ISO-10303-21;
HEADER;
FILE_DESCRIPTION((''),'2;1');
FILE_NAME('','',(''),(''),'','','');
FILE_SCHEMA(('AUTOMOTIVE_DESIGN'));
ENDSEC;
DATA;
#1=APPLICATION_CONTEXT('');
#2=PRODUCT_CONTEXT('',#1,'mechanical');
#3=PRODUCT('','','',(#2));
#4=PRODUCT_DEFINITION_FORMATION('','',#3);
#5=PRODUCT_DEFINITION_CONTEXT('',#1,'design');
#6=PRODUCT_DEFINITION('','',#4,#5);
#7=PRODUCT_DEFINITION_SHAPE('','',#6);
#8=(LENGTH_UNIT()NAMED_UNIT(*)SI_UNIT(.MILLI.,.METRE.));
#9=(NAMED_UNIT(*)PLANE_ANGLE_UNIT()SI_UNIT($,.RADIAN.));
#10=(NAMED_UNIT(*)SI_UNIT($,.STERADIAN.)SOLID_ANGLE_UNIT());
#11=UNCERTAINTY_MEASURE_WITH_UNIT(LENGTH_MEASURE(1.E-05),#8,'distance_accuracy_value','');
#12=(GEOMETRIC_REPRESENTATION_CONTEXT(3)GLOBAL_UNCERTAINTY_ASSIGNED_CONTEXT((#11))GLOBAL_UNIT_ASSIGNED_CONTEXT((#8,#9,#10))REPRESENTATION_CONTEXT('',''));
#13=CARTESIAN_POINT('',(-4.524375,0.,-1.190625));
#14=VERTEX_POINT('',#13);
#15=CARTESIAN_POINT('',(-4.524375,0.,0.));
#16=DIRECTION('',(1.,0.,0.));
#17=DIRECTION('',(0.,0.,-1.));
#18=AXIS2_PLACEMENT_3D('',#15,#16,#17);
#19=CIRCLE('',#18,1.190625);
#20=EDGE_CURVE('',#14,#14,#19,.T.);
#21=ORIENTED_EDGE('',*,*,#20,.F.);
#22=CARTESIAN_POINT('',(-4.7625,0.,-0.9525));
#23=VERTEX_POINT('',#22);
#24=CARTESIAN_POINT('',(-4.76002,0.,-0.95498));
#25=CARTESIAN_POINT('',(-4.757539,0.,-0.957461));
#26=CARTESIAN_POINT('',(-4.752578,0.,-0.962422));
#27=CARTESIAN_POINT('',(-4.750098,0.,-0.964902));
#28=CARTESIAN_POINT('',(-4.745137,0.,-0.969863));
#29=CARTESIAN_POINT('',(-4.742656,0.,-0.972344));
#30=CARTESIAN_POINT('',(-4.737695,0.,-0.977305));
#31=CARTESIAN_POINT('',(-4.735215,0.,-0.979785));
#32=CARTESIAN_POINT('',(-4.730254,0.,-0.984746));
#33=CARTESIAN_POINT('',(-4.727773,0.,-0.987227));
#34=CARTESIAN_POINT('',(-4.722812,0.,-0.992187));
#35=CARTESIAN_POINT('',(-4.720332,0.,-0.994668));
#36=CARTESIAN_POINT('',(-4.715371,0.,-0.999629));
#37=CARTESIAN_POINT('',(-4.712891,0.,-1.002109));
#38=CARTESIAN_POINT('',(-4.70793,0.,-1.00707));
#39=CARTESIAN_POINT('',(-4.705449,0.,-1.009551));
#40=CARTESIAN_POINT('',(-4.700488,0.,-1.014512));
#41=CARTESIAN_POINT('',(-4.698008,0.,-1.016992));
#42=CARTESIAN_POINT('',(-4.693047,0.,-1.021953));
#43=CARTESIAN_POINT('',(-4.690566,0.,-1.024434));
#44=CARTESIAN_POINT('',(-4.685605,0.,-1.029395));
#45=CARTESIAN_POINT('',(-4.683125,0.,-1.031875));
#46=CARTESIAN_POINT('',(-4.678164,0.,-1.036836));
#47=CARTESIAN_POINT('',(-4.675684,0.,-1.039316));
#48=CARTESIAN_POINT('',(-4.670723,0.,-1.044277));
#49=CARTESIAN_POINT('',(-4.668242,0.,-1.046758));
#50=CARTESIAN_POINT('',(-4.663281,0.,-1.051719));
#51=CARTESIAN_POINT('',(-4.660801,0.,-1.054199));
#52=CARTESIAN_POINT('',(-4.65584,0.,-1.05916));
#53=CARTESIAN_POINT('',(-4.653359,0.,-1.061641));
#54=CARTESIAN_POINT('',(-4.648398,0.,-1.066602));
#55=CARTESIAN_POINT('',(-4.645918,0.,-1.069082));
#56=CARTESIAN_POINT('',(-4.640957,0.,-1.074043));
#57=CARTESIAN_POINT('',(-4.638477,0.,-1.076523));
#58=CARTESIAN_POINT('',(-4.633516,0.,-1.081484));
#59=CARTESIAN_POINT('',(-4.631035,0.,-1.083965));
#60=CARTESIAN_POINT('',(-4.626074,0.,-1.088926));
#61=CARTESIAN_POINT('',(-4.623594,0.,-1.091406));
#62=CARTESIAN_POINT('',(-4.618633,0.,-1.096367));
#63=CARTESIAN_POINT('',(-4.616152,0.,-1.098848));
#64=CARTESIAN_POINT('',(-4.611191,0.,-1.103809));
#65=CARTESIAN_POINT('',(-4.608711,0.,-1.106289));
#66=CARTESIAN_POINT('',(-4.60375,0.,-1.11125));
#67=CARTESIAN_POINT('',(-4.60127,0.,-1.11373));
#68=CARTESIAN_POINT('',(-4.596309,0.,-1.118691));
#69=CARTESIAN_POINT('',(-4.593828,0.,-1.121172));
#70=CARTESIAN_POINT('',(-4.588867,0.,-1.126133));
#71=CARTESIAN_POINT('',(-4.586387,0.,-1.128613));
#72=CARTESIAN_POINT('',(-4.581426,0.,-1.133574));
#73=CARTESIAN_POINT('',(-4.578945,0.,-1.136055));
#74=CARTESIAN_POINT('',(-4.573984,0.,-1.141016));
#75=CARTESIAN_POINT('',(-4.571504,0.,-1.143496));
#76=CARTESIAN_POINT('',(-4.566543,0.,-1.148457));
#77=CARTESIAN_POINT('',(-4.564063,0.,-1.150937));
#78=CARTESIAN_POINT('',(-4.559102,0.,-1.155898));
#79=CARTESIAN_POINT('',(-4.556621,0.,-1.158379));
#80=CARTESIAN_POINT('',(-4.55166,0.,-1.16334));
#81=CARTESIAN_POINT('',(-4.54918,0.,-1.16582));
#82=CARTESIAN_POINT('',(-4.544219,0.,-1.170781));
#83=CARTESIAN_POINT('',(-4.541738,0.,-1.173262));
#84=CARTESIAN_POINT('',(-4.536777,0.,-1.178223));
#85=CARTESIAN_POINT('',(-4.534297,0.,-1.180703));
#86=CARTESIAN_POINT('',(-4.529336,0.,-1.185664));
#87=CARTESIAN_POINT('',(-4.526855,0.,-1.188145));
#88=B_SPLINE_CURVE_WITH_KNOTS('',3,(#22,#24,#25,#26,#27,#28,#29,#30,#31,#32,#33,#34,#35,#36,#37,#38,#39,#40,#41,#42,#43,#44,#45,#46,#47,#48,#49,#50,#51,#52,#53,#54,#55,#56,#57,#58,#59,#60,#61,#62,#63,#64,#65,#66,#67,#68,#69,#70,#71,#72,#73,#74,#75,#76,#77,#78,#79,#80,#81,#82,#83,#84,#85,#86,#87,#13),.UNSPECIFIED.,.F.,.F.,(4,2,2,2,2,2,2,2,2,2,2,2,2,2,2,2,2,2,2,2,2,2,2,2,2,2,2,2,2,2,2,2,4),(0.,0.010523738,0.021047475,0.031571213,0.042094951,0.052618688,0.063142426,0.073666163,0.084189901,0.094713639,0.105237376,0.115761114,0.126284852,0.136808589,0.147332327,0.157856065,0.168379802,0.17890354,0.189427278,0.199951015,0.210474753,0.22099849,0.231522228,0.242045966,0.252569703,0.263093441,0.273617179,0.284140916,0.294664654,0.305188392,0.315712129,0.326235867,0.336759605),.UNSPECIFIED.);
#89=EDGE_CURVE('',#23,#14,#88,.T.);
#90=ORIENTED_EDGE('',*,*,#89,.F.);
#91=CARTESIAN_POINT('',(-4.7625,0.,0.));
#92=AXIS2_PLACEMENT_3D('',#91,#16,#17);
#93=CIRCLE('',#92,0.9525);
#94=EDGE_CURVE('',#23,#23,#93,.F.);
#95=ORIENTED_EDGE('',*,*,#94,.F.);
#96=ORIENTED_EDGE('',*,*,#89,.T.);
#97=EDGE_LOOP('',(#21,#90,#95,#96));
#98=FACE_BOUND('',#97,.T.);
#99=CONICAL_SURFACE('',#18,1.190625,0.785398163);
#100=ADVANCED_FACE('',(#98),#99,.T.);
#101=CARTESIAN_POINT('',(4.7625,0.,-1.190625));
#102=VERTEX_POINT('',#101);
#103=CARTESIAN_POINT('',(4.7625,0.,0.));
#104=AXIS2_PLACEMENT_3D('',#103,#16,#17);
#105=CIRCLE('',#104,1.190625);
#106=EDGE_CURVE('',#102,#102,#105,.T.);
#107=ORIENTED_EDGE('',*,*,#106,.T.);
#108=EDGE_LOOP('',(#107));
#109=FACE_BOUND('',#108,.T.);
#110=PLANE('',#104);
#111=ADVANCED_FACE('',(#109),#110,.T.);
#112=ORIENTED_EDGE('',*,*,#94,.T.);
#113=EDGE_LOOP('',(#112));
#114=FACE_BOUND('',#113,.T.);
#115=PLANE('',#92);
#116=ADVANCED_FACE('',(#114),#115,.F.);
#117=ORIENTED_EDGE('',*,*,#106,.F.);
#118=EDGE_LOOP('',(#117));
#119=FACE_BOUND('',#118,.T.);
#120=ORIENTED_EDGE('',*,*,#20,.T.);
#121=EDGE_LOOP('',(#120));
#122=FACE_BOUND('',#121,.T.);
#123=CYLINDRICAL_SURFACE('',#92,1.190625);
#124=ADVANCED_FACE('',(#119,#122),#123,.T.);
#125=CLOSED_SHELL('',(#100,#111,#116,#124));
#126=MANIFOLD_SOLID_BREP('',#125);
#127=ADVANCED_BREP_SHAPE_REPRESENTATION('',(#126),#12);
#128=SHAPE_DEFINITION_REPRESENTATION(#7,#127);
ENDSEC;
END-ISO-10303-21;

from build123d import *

# Parameters (mm, degrees)
EXTRUDE1_DEPTH        = 4.7625
EXTRUDE1_DEPTH_BACK   = 4.7625
SKETCH2_R             = 1.190625
CHAMFER1_SIZE         = 0.238125
DELETEFACE1_START     = 4.5243749
DELETEFACE1_OUTLINE_R = 1.190625
DELETEFACE1_DEPTH     = 0.2381251


# Read off the part's stored shape, not the designer's step: DeleteFace1
with BuildPart() as part:
    # Sketch2 → Extrude1 (new, two sides: drawn at the far end of the back side and taken through both)
    with BuildSketch(Plane(origin=(0, 0, 0), x_dir=(0, 0, -1), z_dir=(1, 0, 0)).offset(-EXTRUDE1_DEPTH_BACK)):
        Circle(SKETCH2_R)
    extrude(amount=EXTRUDE1_DEPTH + EXTRUDE1_DEPTH_BACK)

    # Chamfer1
    chamfer1_edges = [part.edges().sort_by_distance(p)[0] for p in [
        (-4.7625, 0, 1.190625),
        (4.7625, 0, 1.190625),
    ]]
    chamfer(chamfer1_edges, length=CHAMFER1_SIZE)

    # DeleteFace1 outline → DeleteFace1 (add)
    with BuildSketch(Plane.YZ.offset(DELETEFACE1_START)):
        Circle(DELETEFACE1_OUTLINE_R)
    extrude(amount=DELETEFACE1_DEPTH)


solid = part.part
